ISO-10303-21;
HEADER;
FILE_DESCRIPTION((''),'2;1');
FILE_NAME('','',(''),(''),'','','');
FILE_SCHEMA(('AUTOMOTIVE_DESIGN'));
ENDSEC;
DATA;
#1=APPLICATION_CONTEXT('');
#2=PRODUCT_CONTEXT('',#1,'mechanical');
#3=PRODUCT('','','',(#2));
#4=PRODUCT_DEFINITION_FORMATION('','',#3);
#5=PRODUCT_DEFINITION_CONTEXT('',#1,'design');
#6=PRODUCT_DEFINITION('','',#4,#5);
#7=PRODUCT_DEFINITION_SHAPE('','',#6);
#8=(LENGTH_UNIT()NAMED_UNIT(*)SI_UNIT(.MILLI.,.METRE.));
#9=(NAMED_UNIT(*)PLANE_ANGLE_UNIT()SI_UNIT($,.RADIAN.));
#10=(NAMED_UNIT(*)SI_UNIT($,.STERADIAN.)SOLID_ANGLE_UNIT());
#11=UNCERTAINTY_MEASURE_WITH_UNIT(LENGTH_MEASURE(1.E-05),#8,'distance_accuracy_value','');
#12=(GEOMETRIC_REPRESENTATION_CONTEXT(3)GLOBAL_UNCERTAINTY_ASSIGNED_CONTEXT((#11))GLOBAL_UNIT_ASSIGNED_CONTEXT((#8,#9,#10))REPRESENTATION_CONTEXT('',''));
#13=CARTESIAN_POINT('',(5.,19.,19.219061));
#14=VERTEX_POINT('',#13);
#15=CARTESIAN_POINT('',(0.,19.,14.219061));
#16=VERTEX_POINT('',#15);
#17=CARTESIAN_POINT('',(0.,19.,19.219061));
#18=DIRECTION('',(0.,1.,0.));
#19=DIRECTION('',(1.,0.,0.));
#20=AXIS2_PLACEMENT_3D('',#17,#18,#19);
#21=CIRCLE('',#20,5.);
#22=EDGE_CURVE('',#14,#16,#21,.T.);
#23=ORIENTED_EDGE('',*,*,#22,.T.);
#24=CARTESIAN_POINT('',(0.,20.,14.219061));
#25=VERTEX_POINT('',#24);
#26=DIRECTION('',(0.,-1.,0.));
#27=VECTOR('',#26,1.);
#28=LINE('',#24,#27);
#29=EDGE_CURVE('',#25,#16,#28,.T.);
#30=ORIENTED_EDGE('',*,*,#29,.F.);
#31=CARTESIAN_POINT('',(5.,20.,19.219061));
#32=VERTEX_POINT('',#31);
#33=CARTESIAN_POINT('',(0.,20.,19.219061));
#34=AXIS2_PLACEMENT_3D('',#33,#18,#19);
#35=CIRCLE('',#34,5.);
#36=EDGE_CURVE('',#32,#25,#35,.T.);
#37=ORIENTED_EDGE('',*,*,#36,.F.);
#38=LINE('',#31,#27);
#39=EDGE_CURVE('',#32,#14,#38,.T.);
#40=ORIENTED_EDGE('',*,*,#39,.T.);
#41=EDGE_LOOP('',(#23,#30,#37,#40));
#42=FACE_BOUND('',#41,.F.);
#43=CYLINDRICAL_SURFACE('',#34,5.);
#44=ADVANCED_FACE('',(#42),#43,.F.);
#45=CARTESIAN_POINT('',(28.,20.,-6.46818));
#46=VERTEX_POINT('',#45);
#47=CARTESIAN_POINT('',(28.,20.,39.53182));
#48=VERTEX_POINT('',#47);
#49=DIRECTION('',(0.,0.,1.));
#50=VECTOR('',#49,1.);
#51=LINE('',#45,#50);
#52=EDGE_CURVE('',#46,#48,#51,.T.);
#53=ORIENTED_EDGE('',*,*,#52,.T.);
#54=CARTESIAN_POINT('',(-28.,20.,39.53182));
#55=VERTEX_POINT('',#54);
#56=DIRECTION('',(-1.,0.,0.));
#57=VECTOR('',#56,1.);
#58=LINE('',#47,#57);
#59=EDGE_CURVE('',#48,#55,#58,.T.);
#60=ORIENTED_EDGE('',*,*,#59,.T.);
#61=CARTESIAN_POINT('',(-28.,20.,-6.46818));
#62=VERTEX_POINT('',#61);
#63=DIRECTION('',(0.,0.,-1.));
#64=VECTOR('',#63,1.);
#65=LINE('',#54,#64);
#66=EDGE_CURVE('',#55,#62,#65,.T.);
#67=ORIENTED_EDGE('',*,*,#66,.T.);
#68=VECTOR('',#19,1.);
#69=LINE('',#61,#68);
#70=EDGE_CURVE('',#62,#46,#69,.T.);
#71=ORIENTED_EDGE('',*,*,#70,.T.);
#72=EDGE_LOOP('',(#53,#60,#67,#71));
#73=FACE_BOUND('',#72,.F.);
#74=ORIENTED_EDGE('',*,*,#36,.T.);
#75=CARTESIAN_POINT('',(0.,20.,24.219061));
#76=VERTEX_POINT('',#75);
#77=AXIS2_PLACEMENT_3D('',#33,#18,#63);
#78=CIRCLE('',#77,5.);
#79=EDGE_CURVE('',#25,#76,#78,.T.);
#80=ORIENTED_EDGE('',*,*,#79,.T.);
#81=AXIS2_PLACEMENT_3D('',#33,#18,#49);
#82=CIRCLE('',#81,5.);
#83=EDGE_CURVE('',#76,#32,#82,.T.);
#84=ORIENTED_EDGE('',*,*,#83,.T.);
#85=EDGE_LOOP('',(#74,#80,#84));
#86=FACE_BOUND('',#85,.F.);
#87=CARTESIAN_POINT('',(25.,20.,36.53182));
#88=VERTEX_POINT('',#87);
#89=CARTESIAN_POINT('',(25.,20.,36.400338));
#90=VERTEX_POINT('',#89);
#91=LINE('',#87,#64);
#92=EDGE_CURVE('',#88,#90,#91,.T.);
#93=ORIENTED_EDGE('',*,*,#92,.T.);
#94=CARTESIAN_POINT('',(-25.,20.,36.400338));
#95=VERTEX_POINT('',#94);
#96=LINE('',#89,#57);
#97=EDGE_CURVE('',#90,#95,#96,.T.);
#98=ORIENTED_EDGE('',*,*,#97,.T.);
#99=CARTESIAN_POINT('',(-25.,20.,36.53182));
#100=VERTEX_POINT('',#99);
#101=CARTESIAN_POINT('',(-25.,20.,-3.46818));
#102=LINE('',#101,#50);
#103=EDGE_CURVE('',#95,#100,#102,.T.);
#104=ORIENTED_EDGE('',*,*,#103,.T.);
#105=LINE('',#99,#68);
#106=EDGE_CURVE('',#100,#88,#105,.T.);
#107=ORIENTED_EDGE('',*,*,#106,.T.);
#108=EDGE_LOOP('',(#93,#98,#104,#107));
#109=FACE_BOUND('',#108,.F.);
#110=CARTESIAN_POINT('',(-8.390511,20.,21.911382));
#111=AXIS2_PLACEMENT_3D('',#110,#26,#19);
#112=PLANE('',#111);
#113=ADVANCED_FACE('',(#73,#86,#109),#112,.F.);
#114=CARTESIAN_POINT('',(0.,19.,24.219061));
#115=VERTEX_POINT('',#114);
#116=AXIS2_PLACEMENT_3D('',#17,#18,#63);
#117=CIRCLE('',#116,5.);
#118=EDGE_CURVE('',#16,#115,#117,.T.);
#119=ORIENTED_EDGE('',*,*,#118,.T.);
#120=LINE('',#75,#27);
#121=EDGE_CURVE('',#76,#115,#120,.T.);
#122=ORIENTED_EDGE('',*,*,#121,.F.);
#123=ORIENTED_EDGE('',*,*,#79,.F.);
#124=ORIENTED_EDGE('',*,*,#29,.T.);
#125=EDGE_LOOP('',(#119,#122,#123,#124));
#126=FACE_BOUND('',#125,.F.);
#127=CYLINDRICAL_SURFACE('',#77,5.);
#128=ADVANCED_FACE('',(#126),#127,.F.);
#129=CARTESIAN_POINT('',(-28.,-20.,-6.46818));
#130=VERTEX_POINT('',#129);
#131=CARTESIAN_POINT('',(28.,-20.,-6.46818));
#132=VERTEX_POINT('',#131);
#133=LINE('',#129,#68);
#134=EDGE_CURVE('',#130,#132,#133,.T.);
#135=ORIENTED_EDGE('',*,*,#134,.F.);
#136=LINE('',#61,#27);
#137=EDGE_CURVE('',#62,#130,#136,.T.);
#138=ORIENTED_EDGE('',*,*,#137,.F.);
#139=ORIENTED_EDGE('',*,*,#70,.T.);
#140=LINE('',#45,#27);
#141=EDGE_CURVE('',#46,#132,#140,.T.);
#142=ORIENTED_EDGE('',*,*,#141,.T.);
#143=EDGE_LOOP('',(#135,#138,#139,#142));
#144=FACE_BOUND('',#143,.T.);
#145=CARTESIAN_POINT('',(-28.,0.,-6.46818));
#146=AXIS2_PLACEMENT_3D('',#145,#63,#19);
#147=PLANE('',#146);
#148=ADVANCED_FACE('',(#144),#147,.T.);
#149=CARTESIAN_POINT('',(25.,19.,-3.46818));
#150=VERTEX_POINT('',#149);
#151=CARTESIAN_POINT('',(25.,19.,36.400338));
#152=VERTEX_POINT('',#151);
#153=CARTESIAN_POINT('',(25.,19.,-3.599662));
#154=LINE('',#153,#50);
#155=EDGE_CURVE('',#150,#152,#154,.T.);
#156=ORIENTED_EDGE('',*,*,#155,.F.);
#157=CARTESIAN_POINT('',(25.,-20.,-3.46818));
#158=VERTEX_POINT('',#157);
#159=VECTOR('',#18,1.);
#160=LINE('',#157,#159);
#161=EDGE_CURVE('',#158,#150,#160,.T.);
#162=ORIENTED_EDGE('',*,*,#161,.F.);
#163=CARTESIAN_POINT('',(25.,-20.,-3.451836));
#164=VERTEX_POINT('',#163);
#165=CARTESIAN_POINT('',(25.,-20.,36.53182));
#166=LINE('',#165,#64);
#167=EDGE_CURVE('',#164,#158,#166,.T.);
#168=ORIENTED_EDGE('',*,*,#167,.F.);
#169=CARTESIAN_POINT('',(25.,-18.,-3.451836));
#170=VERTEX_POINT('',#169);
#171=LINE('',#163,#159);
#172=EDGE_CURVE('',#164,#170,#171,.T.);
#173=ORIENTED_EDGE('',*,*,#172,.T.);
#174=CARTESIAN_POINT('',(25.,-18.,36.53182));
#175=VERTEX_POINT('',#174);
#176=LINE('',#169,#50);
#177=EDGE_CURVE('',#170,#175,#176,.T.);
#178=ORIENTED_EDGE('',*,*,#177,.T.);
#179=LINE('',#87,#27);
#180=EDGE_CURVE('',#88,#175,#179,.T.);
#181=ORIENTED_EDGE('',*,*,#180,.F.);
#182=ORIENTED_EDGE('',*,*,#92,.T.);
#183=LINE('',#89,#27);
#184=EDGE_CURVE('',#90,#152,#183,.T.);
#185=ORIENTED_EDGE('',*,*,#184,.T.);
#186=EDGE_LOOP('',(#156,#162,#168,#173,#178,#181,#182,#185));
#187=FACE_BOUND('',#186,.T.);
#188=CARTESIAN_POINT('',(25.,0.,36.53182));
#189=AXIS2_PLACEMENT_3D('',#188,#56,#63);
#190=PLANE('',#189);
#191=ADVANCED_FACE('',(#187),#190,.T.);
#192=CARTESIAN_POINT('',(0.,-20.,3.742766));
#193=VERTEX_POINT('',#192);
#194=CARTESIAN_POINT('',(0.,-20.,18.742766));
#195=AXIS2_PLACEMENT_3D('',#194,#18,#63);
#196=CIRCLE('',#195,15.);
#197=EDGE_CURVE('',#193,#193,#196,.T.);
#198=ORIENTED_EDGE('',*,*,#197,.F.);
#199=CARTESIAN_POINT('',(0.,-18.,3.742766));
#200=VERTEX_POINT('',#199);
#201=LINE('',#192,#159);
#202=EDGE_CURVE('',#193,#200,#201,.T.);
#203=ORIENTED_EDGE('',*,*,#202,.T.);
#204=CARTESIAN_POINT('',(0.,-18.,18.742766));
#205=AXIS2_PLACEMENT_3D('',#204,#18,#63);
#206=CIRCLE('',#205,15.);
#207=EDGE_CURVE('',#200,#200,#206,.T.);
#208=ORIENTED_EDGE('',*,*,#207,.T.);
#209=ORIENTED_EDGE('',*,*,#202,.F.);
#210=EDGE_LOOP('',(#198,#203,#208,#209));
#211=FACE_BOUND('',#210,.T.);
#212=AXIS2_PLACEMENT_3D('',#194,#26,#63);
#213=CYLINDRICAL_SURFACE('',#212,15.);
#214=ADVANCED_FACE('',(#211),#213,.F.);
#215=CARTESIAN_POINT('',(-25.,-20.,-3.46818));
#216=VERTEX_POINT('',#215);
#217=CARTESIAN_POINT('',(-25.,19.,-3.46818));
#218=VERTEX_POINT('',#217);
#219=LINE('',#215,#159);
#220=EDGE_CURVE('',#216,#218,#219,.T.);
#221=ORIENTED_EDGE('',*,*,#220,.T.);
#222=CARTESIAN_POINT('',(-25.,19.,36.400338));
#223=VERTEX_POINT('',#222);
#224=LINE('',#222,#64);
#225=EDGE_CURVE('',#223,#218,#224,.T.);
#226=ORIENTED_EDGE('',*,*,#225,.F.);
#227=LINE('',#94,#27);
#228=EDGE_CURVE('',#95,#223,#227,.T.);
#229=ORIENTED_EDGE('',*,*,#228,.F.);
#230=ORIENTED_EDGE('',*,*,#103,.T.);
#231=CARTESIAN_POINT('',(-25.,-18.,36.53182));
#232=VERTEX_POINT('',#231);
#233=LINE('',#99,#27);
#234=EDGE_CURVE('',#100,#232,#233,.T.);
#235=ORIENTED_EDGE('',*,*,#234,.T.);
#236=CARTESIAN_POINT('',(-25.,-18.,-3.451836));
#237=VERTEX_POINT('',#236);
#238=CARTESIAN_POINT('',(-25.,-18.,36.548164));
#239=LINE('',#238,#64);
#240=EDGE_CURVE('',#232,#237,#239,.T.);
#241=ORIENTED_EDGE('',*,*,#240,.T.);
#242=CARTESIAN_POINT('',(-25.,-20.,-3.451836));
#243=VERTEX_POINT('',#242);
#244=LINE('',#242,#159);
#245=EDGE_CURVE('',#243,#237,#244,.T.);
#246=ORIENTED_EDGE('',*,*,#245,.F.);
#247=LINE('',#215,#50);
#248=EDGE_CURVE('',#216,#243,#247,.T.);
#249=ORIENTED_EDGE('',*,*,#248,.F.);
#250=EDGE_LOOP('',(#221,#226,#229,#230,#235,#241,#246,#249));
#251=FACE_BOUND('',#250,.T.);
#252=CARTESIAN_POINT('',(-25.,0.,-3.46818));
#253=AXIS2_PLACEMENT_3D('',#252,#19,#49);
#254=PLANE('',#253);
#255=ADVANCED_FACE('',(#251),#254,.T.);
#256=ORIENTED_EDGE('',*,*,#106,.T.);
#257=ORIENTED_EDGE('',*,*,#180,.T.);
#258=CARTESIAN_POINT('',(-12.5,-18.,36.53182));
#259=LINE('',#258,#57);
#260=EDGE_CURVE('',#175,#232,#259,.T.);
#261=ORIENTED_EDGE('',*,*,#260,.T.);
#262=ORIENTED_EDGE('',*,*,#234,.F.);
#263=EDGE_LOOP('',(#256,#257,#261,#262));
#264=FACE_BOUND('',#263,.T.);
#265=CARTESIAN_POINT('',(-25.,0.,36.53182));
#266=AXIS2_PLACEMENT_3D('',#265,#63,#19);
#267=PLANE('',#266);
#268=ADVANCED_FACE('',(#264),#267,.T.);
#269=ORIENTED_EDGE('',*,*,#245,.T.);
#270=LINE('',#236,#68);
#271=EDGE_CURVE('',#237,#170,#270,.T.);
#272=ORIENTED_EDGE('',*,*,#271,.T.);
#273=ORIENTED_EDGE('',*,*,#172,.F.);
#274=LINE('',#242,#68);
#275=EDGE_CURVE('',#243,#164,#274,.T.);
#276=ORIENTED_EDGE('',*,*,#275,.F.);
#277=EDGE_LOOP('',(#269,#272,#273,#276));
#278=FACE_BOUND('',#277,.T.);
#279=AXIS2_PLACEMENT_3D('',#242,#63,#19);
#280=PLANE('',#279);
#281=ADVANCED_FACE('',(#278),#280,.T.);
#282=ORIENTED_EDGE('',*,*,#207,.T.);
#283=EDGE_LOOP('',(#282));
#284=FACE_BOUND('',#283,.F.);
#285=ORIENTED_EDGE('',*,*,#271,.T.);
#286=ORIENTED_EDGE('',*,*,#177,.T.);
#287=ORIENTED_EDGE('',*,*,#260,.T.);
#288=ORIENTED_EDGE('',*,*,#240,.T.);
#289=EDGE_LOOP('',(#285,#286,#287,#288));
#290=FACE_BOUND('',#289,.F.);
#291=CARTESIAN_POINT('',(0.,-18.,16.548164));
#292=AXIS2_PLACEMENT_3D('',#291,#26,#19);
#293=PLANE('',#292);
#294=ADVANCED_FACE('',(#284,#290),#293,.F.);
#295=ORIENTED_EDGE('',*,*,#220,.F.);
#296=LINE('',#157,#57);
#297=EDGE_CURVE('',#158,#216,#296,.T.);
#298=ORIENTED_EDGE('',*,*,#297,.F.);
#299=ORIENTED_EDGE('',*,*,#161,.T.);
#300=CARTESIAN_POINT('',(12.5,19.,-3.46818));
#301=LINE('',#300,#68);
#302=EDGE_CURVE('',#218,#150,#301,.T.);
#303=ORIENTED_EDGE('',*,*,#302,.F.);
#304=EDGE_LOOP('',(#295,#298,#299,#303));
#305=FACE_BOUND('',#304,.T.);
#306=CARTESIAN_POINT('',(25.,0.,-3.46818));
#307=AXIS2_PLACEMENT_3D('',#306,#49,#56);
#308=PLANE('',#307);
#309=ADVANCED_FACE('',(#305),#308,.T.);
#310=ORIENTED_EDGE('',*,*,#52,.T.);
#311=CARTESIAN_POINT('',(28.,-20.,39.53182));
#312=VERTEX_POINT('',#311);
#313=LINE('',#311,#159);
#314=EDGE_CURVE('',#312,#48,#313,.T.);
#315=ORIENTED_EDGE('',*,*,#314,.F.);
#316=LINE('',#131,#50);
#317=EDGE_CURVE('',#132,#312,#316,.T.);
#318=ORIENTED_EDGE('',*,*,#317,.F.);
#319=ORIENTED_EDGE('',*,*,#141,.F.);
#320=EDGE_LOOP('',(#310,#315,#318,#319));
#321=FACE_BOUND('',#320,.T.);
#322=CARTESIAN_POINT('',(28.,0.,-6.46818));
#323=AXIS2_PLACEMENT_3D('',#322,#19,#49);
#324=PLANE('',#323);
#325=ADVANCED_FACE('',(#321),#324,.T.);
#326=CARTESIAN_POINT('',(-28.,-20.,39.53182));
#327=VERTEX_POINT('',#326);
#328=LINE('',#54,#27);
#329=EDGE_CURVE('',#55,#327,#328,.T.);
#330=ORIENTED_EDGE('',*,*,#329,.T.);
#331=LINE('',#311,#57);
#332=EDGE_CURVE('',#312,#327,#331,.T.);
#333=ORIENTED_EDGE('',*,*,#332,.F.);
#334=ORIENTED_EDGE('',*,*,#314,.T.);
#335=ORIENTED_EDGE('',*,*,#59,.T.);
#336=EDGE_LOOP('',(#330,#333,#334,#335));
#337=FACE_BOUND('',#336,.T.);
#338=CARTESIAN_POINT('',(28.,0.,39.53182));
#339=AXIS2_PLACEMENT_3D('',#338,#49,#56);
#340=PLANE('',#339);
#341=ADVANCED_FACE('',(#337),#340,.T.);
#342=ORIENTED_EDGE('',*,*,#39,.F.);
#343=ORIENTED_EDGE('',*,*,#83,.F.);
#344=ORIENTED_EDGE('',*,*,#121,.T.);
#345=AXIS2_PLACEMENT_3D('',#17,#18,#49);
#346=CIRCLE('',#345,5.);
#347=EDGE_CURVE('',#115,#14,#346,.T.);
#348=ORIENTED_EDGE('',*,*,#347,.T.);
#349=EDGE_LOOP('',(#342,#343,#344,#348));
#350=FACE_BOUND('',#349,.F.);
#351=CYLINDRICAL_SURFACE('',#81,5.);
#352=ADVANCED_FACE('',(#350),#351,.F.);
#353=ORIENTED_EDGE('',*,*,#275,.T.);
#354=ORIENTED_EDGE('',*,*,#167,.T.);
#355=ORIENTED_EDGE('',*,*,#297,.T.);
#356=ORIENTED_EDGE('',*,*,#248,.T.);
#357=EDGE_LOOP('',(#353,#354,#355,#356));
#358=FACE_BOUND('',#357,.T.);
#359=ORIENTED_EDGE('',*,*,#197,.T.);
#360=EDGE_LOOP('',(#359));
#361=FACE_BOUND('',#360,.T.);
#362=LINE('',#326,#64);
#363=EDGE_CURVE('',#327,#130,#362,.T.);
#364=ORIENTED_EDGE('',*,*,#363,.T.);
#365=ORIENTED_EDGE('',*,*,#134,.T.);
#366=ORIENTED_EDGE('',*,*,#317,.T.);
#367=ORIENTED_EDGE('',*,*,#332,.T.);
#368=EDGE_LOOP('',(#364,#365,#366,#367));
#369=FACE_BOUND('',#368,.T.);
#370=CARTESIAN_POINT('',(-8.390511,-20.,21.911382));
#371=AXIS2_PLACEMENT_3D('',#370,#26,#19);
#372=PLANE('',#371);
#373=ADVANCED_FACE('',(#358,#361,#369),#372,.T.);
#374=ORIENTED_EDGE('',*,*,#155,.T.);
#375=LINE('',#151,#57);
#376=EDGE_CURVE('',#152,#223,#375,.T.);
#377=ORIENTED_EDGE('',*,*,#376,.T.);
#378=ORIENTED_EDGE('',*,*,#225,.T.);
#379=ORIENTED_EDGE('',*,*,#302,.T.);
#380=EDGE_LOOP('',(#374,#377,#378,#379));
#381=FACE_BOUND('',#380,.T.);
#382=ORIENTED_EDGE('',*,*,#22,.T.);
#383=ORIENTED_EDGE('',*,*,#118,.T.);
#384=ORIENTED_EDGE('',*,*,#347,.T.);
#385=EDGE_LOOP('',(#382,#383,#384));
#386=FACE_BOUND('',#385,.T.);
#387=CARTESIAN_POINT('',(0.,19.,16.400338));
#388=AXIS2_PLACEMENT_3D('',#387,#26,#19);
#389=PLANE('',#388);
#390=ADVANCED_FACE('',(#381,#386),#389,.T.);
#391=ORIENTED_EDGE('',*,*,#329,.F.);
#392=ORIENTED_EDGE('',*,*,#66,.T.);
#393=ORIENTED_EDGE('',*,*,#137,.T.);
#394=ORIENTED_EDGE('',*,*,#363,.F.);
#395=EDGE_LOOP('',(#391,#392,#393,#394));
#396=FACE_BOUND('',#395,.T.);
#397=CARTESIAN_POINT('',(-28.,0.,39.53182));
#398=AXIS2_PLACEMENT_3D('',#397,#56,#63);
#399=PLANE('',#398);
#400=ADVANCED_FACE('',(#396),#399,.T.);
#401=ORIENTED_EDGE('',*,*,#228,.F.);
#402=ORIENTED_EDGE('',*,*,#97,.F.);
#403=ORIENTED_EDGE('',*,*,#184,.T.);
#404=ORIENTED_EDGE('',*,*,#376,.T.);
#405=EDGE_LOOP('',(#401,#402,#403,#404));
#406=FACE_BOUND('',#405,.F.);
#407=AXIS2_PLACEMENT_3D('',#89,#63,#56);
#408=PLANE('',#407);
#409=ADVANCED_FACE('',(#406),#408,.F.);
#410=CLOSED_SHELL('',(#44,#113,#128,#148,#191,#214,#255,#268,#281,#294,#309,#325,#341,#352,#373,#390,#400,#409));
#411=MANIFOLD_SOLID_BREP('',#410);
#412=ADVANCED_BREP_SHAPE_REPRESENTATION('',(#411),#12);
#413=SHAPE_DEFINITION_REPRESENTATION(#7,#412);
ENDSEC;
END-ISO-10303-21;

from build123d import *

# Parameters (mm, degrees)
F1_DEPTH = 20
F5_DEPTH = 1
F7_DEPTH = 2


# Not quite as in the source:
# - a feature names something its author has since deleted; it is built from what else it names


with BuildPart() as f1:
    # F0 (on Front) → F1 (new body, symmetric)
    with BuildSketch(Plane.XZ):
        Polygon((-25, -3.4681803342), (-25, 36.5318196658), (25, 36.5318196658), (25, 26.5318196658), (28, 26.5318196658), (28, 39.5318196658), (-28, 39.5318196658), (-28, -6.4681803342), (0, -6.4681803342), (0, -3.4681803342), align=None)
        Polygon((28, 26.5318196658), (25, 26.5318196658), (25, -3.4681803342), (0, -3.4681803342), (0, -6.4681803342), (28, -6.4681803342), align=None)
    extrude(amount=F1_DEPTH, both=True)

    # F4 (on offset) → F5 (join)
    with BuildSketch(Plane.XZ.offset(-20)):
        Polygon((25, -3.5996623058), (25, 36.4003376942), (-25, 36.4003376942), (-25, -3.5996623058), (0, -3.5996623058), align=None)
        with BuildLine():
            ThreePointArc((5, 19.2190613598), (3.5355339059, 15.6835274538), (0, 14.2190613598))
            ThreePointArc((0, 14.2190613598), (-5, 19.2190613598), (0, 24.2190613598))
            ThreePointArc((0, 24.2190613598), (3.5355339059, 22.7545952657), (5, 19.2190613598))
        make_face(mode=Mode.SUBTRACT)
    extrude(amount=F5_DEPTH)

    # F6 (on offset) → F7 (join)
    with BuildSketch(Plane.XZ.offset(20)):
        Polygon((-25, 36.5481637139), (-25, -3.4518362861), (0, -3.4518362861), (25, -3.4518362861), (25, 36.5481637139), align=None)
        with BuildLine():
            ThreePointArc((15, 18.7427662313), (10.6066017178, 8.1361645135), (0, 3.7427662313))
            ThreePointArc((0, 3.7427662313), (-10.6066017178, 29.3493679491), (15, 18.7427662313))
        make_face(mode=Mode.SUBTRACT)
    extrude(amount=-F7_DEPTH)


solid = f1.part
